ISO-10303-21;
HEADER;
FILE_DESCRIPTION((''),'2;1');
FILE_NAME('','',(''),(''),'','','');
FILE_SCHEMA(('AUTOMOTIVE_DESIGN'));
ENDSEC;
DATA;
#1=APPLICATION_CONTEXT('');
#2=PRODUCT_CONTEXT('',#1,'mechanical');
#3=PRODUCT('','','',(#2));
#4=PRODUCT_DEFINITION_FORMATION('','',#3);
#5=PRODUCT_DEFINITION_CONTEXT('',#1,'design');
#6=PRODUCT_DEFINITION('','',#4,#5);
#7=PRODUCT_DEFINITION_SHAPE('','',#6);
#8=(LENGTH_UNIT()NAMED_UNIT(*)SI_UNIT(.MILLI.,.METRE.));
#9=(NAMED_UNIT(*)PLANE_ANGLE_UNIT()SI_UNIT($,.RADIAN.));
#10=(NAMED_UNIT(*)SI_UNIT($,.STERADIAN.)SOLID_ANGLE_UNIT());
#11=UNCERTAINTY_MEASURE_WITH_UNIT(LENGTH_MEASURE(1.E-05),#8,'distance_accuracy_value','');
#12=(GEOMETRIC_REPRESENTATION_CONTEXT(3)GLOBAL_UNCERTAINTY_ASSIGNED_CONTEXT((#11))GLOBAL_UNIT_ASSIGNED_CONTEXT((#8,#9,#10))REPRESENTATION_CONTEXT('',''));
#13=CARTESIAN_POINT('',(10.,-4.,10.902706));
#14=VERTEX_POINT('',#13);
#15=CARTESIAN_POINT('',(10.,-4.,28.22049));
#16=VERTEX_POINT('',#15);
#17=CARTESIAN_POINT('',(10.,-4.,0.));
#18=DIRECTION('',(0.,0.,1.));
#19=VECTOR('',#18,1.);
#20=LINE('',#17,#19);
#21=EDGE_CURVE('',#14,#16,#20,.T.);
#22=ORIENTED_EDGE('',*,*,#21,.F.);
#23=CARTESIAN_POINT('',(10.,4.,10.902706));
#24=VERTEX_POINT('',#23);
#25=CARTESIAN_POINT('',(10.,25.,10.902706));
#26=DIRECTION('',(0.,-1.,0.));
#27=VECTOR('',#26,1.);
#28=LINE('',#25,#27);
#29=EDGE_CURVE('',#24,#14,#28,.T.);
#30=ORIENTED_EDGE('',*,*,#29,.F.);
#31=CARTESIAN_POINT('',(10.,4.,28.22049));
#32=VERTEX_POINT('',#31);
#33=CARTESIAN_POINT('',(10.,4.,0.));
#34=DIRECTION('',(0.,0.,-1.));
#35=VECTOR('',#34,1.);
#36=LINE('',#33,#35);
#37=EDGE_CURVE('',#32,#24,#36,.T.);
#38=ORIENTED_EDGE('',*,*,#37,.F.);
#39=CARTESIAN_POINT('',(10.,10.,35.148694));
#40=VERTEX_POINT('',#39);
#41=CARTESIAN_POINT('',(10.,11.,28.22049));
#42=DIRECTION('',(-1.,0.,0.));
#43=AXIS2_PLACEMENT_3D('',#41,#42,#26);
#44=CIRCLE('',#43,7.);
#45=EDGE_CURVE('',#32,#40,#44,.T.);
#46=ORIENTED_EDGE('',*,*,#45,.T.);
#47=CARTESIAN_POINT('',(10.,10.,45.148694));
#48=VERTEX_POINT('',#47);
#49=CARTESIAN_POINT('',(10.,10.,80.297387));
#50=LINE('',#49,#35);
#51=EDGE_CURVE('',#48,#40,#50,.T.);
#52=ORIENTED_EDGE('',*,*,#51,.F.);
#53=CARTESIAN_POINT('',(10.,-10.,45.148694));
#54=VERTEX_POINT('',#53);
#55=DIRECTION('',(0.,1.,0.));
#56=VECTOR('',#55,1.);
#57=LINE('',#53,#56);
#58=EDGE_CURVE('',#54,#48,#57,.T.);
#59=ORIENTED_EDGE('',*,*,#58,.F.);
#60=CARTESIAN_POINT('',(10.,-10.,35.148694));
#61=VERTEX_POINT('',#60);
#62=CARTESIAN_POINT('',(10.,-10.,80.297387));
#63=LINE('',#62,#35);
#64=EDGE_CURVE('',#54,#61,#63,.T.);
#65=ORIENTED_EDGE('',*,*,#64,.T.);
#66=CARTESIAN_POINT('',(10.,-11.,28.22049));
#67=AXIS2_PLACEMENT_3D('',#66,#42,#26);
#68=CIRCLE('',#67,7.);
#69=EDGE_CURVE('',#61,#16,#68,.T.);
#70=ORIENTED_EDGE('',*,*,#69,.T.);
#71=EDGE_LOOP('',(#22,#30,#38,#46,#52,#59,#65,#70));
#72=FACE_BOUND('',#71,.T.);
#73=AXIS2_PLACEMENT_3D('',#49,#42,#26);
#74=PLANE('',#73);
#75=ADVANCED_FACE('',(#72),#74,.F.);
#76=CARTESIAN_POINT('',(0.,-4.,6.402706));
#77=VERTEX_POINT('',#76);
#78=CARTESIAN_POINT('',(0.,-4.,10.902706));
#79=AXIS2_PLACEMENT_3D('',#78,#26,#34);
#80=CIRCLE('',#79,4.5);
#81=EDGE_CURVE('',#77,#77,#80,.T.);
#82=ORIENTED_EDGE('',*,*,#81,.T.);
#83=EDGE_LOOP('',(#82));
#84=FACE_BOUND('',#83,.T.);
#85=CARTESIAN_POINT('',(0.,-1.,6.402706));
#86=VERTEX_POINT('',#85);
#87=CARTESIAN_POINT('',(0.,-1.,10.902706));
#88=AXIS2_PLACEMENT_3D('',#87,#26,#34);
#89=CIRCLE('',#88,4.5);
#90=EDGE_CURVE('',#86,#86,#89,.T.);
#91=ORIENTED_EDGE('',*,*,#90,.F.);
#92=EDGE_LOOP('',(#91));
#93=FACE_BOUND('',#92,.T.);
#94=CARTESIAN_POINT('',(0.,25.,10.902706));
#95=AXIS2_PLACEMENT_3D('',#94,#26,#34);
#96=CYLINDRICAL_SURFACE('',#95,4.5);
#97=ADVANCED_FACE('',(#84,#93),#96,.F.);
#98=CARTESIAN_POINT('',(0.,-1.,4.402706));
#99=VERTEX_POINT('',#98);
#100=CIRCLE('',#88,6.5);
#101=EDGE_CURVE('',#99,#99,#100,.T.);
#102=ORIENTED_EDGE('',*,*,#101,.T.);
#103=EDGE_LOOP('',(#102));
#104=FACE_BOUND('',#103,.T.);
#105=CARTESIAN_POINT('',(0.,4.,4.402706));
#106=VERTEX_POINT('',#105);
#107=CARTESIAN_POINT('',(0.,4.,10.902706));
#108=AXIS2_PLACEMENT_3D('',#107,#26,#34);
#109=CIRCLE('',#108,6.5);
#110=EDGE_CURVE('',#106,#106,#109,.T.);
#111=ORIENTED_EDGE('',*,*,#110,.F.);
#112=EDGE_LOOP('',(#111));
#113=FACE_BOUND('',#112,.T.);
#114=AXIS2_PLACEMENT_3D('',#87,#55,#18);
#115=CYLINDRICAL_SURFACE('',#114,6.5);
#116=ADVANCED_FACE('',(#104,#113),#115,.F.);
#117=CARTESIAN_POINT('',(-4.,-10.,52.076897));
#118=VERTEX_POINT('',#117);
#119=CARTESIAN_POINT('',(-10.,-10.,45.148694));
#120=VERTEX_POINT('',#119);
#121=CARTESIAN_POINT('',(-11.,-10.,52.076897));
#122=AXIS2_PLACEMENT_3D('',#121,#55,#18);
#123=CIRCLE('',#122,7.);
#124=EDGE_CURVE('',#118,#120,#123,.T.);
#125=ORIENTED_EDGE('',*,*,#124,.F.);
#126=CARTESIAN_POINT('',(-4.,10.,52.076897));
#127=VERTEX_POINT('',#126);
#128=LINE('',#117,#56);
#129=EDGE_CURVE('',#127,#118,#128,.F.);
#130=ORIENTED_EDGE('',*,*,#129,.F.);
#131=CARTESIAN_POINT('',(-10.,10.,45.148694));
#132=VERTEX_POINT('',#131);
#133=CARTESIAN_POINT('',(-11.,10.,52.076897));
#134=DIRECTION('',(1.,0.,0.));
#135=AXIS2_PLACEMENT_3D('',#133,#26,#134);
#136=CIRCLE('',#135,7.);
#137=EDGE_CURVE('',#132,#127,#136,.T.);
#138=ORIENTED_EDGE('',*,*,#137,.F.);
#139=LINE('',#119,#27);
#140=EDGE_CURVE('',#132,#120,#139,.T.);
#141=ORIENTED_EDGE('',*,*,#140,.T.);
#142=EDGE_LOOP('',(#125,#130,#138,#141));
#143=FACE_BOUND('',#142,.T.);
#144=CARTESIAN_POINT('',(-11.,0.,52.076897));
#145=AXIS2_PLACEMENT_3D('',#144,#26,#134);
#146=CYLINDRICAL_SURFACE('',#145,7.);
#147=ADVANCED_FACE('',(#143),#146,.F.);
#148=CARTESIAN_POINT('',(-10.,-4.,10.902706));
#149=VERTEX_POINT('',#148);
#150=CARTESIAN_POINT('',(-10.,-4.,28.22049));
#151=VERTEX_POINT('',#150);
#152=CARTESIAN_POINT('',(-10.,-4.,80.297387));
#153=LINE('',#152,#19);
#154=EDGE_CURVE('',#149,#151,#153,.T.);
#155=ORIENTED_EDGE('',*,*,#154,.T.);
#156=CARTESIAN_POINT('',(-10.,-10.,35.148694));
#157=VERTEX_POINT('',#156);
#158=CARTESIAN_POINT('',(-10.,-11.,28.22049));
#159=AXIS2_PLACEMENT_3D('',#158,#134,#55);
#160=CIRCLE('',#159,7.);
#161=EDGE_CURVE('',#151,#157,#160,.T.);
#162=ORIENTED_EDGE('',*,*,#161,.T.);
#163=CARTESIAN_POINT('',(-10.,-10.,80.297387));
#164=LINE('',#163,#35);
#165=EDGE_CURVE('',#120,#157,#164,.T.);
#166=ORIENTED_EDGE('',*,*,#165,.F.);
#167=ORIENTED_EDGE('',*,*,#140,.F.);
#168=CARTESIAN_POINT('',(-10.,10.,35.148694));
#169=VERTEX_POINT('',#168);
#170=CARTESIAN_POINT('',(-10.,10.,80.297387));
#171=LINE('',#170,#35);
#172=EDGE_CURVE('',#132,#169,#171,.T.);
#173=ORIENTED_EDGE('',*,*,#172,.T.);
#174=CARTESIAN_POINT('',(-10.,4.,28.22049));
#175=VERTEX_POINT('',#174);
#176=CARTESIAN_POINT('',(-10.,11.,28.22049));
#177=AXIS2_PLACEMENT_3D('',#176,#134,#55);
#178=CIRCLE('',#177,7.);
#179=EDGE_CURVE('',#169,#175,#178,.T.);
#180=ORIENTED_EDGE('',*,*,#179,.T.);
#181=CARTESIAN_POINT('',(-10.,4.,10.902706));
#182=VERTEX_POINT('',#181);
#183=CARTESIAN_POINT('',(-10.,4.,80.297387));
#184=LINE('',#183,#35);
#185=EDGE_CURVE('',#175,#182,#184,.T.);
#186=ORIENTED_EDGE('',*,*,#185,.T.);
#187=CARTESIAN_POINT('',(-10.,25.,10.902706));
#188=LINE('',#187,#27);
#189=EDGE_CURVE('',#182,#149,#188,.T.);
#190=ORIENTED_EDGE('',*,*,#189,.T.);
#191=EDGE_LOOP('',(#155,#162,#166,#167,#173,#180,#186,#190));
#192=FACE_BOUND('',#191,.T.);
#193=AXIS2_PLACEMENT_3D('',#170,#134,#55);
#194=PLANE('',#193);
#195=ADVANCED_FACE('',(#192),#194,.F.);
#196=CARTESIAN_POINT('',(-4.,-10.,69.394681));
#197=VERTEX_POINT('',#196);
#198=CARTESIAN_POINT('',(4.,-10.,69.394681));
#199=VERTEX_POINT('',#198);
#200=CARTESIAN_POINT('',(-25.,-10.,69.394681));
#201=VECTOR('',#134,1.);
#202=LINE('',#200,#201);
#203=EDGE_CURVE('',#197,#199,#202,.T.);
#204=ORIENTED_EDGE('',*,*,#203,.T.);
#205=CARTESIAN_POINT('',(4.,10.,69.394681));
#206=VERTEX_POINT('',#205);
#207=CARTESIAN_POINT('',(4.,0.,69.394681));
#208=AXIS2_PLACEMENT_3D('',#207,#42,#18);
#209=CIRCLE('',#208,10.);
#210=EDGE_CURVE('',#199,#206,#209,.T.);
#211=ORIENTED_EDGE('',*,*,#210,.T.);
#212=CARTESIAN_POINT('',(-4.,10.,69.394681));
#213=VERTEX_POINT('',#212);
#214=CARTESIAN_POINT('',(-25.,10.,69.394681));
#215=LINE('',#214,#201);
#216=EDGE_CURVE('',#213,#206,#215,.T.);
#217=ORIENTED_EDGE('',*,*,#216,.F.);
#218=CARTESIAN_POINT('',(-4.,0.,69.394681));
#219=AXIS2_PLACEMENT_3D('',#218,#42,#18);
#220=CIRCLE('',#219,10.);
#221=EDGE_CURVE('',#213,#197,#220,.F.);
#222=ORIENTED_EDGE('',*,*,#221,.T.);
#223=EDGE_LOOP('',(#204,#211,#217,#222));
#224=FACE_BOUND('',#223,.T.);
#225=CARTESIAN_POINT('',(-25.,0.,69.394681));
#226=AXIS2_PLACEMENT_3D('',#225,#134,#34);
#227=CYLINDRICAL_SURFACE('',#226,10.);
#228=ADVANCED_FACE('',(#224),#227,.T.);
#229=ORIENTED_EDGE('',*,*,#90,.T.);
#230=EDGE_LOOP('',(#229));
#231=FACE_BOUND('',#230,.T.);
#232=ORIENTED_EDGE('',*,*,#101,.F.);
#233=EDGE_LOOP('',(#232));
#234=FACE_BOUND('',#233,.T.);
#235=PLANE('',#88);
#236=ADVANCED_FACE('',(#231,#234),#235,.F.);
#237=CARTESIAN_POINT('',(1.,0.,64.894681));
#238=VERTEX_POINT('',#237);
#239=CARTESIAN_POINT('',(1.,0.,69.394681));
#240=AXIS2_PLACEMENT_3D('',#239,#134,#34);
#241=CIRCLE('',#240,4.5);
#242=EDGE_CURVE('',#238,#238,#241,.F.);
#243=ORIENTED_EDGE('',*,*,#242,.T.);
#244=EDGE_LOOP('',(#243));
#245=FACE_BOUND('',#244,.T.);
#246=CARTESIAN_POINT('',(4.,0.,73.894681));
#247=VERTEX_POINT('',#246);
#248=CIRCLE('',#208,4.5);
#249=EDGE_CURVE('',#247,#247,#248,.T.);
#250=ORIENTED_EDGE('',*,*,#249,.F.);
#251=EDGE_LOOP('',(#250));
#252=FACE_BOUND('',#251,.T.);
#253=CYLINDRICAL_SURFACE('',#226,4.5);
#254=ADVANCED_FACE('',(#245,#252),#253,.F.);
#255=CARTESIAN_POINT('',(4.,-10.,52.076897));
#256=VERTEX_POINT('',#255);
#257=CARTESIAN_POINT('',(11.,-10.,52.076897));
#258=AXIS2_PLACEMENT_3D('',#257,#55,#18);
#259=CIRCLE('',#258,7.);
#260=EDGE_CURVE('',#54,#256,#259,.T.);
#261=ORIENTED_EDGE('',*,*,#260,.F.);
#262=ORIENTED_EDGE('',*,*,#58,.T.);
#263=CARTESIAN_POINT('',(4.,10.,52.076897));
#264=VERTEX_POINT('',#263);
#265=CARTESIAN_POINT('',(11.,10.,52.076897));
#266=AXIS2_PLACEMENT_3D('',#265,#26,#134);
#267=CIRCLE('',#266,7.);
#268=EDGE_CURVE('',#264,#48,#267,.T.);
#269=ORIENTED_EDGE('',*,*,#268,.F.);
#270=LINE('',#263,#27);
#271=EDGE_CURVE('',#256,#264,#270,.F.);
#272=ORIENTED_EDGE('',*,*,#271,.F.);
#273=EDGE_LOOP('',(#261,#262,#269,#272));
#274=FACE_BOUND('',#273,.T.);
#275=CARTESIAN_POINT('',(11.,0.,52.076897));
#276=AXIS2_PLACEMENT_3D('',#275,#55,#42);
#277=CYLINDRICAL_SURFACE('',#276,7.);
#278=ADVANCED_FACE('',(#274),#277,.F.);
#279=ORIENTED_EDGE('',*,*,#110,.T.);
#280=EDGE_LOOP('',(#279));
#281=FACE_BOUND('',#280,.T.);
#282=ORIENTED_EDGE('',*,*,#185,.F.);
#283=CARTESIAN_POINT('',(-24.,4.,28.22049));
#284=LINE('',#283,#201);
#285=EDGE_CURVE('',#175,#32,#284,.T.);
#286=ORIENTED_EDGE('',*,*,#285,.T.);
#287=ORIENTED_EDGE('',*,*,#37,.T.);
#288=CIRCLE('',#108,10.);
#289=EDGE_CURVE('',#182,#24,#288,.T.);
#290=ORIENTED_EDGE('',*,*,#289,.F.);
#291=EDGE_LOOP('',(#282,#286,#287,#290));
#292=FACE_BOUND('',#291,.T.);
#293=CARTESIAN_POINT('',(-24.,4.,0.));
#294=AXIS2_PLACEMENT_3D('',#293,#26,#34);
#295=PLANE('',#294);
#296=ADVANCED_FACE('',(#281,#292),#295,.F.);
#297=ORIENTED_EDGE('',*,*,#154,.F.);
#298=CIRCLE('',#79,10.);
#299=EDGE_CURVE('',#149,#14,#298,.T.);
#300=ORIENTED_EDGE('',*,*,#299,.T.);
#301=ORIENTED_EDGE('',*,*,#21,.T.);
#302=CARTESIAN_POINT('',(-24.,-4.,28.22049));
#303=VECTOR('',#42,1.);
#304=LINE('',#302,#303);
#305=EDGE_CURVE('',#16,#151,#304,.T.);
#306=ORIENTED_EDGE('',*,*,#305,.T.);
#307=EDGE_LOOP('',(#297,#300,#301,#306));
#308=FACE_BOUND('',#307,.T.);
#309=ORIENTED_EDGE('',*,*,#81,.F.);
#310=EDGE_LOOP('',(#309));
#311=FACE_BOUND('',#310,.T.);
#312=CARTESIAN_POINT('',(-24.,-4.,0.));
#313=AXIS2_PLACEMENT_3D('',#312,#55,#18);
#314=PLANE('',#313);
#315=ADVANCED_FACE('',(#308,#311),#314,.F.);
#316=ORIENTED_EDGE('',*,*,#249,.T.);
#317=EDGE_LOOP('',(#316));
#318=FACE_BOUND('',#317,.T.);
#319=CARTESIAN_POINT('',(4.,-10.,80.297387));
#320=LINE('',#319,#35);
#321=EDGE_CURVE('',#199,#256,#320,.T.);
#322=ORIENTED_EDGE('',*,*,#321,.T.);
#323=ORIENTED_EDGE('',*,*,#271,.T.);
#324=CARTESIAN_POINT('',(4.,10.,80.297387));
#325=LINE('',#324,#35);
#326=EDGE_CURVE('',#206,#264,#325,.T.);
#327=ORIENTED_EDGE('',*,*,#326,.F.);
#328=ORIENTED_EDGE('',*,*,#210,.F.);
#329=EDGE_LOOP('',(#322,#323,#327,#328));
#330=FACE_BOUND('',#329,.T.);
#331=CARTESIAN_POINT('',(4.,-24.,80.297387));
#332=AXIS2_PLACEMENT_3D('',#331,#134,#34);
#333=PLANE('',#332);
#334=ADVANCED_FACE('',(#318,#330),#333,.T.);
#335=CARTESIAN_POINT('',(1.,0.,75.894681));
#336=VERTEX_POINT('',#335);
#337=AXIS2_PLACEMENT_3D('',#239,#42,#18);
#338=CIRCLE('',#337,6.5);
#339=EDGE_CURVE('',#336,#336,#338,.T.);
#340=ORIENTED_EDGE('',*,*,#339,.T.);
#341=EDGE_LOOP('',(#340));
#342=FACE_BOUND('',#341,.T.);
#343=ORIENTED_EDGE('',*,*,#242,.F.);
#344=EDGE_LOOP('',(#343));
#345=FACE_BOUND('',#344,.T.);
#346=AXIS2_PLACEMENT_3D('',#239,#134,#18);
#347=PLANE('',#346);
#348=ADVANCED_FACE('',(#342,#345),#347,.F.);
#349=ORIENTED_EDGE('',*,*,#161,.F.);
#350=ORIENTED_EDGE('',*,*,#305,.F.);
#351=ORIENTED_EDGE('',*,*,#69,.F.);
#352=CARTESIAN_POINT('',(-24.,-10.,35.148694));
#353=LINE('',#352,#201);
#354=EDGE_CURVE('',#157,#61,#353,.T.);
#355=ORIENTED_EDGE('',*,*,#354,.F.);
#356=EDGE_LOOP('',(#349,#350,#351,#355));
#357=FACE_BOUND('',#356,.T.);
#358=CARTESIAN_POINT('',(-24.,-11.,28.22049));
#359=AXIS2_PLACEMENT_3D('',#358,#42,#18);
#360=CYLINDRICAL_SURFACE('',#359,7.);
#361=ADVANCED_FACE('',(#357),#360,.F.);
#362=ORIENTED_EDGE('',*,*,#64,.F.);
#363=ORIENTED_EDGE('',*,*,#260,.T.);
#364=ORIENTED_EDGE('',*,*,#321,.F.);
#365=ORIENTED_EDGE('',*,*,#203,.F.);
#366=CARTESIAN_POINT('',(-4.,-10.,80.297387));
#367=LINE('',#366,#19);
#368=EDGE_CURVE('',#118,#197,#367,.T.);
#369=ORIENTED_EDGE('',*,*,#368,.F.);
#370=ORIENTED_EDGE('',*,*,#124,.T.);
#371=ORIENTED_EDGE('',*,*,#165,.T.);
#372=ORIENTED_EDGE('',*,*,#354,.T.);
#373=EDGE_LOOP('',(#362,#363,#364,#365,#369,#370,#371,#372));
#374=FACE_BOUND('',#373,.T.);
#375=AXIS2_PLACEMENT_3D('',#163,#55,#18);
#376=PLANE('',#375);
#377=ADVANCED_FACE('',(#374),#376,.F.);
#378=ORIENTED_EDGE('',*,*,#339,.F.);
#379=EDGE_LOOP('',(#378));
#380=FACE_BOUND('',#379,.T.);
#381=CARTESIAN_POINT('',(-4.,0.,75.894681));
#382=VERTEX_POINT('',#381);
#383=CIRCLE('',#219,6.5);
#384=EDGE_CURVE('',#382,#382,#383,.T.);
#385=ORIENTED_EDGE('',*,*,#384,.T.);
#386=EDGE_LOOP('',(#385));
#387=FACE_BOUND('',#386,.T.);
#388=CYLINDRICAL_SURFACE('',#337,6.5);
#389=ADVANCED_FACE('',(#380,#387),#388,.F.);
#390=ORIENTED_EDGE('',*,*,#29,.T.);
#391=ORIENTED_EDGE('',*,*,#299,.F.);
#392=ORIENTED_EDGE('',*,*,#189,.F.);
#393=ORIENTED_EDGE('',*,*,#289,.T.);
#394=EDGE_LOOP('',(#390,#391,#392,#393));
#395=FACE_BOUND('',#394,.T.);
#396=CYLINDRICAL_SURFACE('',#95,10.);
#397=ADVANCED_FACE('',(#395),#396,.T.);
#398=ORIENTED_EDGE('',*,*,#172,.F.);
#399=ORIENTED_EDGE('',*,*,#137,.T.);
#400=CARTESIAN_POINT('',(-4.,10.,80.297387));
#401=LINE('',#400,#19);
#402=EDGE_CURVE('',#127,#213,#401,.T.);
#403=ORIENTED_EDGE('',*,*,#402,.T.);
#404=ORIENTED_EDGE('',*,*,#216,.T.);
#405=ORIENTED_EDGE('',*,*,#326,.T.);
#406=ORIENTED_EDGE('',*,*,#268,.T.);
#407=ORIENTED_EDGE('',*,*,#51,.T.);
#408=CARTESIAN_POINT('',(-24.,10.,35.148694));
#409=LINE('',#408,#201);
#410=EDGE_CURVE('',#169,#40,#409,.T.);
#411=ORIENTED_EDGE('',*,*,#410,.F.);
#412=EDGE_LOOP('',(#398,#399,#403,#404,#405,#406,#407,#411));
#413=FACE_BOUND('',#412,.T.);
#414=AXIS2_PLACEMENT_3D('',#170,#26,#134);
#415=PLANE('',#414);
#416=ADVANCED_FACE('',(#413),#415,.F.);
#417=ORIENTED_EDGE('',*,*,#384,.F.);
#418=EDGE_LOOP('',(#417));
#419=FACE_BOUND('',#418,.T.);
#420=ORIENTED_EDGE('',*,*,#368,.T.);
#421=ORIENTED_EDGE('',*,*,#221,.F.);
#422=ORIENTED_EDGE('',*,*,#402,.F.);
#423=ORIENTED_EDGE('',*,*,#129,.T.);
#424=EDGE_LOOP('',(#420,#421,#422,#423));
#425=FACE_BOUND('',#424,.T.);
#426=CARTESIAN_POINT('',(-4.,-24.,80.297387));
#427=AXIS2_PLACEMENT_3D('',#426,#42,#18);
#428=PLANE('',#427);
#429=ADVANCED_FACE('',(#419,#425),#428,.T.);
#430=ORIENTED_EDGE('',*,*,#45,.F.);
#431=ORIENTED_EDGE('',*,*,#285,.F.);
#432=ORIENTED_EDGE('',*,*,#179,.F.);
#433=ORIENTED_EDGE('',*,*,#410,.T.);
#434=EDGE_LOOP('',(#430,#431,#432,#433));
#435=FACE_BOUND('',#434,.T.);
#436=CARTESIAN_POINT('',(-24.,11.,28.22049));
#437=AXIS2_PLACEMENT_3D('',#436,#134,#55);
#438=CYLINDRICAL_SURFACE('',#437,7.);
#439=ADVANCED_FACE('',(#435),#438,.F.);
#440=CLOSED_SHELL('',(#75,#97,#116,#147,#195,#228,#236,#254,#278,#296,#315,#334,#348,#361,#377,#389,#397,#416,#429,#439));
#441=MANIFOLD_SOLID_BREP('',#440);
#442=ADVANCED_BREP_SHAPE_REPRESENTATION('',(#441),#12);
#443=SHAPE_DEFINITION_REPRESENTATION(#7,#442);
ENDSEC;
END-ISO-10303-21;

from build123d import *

# Parameters (mm, degrees)
SKETCH_1_W          = 20
SKETCH_1_H          = 20
EXTRUDE_1_DEPTH     = 80.297387422
SKETCH_7_W          = 35.148693711
SKETCH_7_H          = 6
CUT_EXTRUDE_6_DEPTH = 34
SKETCH_2_R          = 6.5
CUT_EXTRUDE_9_DEPTH = 5
SKETCH_3_R          = 4.5
CUT_EXTRUDE_2_DEPTH = 29
MOVE_BODY_1_ANGLE   = 90
SKETCH_8_W          = 20
SKETCH_8_H          = 20
EXTRUDE_2_DEPTH     = 8
FILLET_2_R          = 7


# Read off the part's stored shape, not the designer's step: 교차3
with BuildPart() as part:
    # 스케치1 → 보스-돌출1 (new body)
    with BuildSketch(Plane.XY):
        Rectangle(SKETCH_1_W, SKETCH_1_H)
    extrude(amount=EXTRUDE_1_DEPTH)

    # 스케치7 → 컷-돌출6 (cut)
    with BuildSketch(Plane(origin=(10, 0, 0), x_dir=(0, 0, -1), z_dir=(1, 0, 0))):
        with Locations((-17.574346855, 7)):
            Rectangle(SKETCH_7_W, SKETCH_7_H)
        with Locations((-17.574346855, -7)):
            Rectangle(SKETCH_7_W, SKETCH_7_H)
    cut_extrude_6 = extrude(amount=-CUT_EXTRUDE_6_DEPTH, mode=Mode.SUBTRACT)

    # 스케치2 → 컷-돌출9 (cut)
    with BuildSketch(Plane(origin=(0, 4, 0), x_dir=(-1, 0, 0), z_dir=(0, -1, 0))):
        with Locations(Location((0, -10.902706153, 0), (0, 0, 90))):
            Circle(SKETCH_2_R)
    cut_extrude_9 = extrude(amount=CUT_EXTRUDE_9_DEPTH, mode=Mode.SUBTRACT)

    # 스케치3 → 컷-돌출2 (cut)
    with BuildSketch(Plane(origin=(0, -4, 0), x_dir=(-1, 0, 0), z_dir=(0, -1, 0))):
        with Locations(Location((0, -10.902706153, 0), (0, 0, 90))):
            Circle(SKETCH_3_R)
        with BuildLine():
            Line((-21.262122506, -10.902706153), (-10, -10.902706153))
            ThreePointArc((-10, -10.902706153), (0, -0.902706153), (10, -10.902706153))
            Line((10, -10.902706153), (21.262122506, -10.902706153))
            ThreePointArc((21.262122506, -10.902706153), (0, 10.359416353), (-21.262122506, -10.902706153))
        make_face()
    cut_extrude_2 = extrude(amount=-CUT_EXTRUDE_2_DEPTH, mode=Mode.SUBTRACT)

    # 대칭 복사6: 컷-돌출6, 컷-돌출9, 컷-돌출2 across plane
    add(cut_extrude_6.mirror(Plane.XY.offset(40.148693711)), mode=Mode.SUBTRACT)
    add(cut_extrude_9.mirror(Plane.XY.offset(40.148693711)), mode=Mode.SUBTRACT)
    add(cut_extrude_2.mirror(Plane.XY.offset(40.148693711)), mode=Mode.SUBTRACT)


with BuildPart() as body_2:
    # 교차3: the piece on the far side of the plane
    add(part.part)
    split(bisect_by=Plane.XY.offset(40.148693711), keep=Keep.BOTTOM)


with BuildPart() as part_1:
    add(part.part)

    # 교차3
    split(bisect_by=Plane.XY.offset(40.148693711), keep=Keep.TOP)


with BuildPart() as part_2:
    # Move Body 1: moved
    add(part_1.part.rotate(Axis((0, 0, 0), (0, 0, 1)), MOVE_BODY_1_ANGLE))


    add(body_2.part)  # 보스-돌출2 merges body 2
    # 스케치8 → 보스-돌출2 (add)
    with BuildSketch(Plane.XY.offset(45.148693711)):
        Rectangle(SKETCH_8_W, SKETCH_8_H)
    extrude(amount=-EXTRUDE_2_DEPTH)

    # 필렛2
    # the kernel refuses this fillet: 7 mm, written as the material it adds along each edge
    with BuildSketch(Plane(origin=(-4, 10, 45.148693711), x_dir=(0, 0, 1), z_dir=(0, -1, 0)), Plane(origin=(10, -4, 35.148693711), x_dir=(0, 0, -1), z_dir=(-1, 0, 0))) as fillet_2_piece_1:
        with BuildLine():
            CenterArc((6.92820323, 7), FILLET_2_R, 188.213210702, 81.786789298)
            Line((0, 6), (-0.138564065, 5.98))
            ThreePointArc((-0.138564065, 5.98), (-0.14, 3), (-0.14, 0))
            Line((-0.14, 0), (0, -0.14))
            Line((0, -0.14), (6.92820323, -0.14))
            Line((6.92820323, -0.14), (6.92820323, 0))
        make_face()
    extrude(amount=20)
    with BuildSketch(Plane(origin=(4, 10, 45.148693711), x_dir=(1, 0, 0), z_dir=(0, -1, 0))) as fillet_2_piece_2:
        with BuildLine():
            CenterArc((7, 6.92820323), FILLET_2_R, 180, 81.786789298)
            Line((0, 6.92820323), (-0.14, 6.92820323))
            Line((-0.14, 6.92820323), (-0.14, 0))
            Line((-0.14, 0), (0, -0.14))
            ThreePointArc((0, -0.14), (3, -0.14), (5.98, -0.138564065))
            Line((5.98, -0.138564065), (6, 0))
        make_face()
    extrude(amount=20)
    with BuildSketch(Plane(origin=(10, 4, 35.148693711), x_dir=(0, 0, -1), z_dir=(-1, 0, 0))) as fillet_2_piece_3:
        with BuildLine():
            CenterArc((6.92820323, -7), FILLET_2_R, 90, 81.786789298)
            Line((0, -6), (-0.138564065, -5.98))
            ThreePointArc((-0.138564065, -5.98), (-0.14, -3), (-0.14, 0))
            Line((-0.14, 0), (0, 0.14))
            Line((0, 0.14), (6.92820323, 0.14))
            Line((6.92820323, 0.14), (6.92820323, 0))
        make_face()
    extrude(amount=20)


solid = part_2.part
